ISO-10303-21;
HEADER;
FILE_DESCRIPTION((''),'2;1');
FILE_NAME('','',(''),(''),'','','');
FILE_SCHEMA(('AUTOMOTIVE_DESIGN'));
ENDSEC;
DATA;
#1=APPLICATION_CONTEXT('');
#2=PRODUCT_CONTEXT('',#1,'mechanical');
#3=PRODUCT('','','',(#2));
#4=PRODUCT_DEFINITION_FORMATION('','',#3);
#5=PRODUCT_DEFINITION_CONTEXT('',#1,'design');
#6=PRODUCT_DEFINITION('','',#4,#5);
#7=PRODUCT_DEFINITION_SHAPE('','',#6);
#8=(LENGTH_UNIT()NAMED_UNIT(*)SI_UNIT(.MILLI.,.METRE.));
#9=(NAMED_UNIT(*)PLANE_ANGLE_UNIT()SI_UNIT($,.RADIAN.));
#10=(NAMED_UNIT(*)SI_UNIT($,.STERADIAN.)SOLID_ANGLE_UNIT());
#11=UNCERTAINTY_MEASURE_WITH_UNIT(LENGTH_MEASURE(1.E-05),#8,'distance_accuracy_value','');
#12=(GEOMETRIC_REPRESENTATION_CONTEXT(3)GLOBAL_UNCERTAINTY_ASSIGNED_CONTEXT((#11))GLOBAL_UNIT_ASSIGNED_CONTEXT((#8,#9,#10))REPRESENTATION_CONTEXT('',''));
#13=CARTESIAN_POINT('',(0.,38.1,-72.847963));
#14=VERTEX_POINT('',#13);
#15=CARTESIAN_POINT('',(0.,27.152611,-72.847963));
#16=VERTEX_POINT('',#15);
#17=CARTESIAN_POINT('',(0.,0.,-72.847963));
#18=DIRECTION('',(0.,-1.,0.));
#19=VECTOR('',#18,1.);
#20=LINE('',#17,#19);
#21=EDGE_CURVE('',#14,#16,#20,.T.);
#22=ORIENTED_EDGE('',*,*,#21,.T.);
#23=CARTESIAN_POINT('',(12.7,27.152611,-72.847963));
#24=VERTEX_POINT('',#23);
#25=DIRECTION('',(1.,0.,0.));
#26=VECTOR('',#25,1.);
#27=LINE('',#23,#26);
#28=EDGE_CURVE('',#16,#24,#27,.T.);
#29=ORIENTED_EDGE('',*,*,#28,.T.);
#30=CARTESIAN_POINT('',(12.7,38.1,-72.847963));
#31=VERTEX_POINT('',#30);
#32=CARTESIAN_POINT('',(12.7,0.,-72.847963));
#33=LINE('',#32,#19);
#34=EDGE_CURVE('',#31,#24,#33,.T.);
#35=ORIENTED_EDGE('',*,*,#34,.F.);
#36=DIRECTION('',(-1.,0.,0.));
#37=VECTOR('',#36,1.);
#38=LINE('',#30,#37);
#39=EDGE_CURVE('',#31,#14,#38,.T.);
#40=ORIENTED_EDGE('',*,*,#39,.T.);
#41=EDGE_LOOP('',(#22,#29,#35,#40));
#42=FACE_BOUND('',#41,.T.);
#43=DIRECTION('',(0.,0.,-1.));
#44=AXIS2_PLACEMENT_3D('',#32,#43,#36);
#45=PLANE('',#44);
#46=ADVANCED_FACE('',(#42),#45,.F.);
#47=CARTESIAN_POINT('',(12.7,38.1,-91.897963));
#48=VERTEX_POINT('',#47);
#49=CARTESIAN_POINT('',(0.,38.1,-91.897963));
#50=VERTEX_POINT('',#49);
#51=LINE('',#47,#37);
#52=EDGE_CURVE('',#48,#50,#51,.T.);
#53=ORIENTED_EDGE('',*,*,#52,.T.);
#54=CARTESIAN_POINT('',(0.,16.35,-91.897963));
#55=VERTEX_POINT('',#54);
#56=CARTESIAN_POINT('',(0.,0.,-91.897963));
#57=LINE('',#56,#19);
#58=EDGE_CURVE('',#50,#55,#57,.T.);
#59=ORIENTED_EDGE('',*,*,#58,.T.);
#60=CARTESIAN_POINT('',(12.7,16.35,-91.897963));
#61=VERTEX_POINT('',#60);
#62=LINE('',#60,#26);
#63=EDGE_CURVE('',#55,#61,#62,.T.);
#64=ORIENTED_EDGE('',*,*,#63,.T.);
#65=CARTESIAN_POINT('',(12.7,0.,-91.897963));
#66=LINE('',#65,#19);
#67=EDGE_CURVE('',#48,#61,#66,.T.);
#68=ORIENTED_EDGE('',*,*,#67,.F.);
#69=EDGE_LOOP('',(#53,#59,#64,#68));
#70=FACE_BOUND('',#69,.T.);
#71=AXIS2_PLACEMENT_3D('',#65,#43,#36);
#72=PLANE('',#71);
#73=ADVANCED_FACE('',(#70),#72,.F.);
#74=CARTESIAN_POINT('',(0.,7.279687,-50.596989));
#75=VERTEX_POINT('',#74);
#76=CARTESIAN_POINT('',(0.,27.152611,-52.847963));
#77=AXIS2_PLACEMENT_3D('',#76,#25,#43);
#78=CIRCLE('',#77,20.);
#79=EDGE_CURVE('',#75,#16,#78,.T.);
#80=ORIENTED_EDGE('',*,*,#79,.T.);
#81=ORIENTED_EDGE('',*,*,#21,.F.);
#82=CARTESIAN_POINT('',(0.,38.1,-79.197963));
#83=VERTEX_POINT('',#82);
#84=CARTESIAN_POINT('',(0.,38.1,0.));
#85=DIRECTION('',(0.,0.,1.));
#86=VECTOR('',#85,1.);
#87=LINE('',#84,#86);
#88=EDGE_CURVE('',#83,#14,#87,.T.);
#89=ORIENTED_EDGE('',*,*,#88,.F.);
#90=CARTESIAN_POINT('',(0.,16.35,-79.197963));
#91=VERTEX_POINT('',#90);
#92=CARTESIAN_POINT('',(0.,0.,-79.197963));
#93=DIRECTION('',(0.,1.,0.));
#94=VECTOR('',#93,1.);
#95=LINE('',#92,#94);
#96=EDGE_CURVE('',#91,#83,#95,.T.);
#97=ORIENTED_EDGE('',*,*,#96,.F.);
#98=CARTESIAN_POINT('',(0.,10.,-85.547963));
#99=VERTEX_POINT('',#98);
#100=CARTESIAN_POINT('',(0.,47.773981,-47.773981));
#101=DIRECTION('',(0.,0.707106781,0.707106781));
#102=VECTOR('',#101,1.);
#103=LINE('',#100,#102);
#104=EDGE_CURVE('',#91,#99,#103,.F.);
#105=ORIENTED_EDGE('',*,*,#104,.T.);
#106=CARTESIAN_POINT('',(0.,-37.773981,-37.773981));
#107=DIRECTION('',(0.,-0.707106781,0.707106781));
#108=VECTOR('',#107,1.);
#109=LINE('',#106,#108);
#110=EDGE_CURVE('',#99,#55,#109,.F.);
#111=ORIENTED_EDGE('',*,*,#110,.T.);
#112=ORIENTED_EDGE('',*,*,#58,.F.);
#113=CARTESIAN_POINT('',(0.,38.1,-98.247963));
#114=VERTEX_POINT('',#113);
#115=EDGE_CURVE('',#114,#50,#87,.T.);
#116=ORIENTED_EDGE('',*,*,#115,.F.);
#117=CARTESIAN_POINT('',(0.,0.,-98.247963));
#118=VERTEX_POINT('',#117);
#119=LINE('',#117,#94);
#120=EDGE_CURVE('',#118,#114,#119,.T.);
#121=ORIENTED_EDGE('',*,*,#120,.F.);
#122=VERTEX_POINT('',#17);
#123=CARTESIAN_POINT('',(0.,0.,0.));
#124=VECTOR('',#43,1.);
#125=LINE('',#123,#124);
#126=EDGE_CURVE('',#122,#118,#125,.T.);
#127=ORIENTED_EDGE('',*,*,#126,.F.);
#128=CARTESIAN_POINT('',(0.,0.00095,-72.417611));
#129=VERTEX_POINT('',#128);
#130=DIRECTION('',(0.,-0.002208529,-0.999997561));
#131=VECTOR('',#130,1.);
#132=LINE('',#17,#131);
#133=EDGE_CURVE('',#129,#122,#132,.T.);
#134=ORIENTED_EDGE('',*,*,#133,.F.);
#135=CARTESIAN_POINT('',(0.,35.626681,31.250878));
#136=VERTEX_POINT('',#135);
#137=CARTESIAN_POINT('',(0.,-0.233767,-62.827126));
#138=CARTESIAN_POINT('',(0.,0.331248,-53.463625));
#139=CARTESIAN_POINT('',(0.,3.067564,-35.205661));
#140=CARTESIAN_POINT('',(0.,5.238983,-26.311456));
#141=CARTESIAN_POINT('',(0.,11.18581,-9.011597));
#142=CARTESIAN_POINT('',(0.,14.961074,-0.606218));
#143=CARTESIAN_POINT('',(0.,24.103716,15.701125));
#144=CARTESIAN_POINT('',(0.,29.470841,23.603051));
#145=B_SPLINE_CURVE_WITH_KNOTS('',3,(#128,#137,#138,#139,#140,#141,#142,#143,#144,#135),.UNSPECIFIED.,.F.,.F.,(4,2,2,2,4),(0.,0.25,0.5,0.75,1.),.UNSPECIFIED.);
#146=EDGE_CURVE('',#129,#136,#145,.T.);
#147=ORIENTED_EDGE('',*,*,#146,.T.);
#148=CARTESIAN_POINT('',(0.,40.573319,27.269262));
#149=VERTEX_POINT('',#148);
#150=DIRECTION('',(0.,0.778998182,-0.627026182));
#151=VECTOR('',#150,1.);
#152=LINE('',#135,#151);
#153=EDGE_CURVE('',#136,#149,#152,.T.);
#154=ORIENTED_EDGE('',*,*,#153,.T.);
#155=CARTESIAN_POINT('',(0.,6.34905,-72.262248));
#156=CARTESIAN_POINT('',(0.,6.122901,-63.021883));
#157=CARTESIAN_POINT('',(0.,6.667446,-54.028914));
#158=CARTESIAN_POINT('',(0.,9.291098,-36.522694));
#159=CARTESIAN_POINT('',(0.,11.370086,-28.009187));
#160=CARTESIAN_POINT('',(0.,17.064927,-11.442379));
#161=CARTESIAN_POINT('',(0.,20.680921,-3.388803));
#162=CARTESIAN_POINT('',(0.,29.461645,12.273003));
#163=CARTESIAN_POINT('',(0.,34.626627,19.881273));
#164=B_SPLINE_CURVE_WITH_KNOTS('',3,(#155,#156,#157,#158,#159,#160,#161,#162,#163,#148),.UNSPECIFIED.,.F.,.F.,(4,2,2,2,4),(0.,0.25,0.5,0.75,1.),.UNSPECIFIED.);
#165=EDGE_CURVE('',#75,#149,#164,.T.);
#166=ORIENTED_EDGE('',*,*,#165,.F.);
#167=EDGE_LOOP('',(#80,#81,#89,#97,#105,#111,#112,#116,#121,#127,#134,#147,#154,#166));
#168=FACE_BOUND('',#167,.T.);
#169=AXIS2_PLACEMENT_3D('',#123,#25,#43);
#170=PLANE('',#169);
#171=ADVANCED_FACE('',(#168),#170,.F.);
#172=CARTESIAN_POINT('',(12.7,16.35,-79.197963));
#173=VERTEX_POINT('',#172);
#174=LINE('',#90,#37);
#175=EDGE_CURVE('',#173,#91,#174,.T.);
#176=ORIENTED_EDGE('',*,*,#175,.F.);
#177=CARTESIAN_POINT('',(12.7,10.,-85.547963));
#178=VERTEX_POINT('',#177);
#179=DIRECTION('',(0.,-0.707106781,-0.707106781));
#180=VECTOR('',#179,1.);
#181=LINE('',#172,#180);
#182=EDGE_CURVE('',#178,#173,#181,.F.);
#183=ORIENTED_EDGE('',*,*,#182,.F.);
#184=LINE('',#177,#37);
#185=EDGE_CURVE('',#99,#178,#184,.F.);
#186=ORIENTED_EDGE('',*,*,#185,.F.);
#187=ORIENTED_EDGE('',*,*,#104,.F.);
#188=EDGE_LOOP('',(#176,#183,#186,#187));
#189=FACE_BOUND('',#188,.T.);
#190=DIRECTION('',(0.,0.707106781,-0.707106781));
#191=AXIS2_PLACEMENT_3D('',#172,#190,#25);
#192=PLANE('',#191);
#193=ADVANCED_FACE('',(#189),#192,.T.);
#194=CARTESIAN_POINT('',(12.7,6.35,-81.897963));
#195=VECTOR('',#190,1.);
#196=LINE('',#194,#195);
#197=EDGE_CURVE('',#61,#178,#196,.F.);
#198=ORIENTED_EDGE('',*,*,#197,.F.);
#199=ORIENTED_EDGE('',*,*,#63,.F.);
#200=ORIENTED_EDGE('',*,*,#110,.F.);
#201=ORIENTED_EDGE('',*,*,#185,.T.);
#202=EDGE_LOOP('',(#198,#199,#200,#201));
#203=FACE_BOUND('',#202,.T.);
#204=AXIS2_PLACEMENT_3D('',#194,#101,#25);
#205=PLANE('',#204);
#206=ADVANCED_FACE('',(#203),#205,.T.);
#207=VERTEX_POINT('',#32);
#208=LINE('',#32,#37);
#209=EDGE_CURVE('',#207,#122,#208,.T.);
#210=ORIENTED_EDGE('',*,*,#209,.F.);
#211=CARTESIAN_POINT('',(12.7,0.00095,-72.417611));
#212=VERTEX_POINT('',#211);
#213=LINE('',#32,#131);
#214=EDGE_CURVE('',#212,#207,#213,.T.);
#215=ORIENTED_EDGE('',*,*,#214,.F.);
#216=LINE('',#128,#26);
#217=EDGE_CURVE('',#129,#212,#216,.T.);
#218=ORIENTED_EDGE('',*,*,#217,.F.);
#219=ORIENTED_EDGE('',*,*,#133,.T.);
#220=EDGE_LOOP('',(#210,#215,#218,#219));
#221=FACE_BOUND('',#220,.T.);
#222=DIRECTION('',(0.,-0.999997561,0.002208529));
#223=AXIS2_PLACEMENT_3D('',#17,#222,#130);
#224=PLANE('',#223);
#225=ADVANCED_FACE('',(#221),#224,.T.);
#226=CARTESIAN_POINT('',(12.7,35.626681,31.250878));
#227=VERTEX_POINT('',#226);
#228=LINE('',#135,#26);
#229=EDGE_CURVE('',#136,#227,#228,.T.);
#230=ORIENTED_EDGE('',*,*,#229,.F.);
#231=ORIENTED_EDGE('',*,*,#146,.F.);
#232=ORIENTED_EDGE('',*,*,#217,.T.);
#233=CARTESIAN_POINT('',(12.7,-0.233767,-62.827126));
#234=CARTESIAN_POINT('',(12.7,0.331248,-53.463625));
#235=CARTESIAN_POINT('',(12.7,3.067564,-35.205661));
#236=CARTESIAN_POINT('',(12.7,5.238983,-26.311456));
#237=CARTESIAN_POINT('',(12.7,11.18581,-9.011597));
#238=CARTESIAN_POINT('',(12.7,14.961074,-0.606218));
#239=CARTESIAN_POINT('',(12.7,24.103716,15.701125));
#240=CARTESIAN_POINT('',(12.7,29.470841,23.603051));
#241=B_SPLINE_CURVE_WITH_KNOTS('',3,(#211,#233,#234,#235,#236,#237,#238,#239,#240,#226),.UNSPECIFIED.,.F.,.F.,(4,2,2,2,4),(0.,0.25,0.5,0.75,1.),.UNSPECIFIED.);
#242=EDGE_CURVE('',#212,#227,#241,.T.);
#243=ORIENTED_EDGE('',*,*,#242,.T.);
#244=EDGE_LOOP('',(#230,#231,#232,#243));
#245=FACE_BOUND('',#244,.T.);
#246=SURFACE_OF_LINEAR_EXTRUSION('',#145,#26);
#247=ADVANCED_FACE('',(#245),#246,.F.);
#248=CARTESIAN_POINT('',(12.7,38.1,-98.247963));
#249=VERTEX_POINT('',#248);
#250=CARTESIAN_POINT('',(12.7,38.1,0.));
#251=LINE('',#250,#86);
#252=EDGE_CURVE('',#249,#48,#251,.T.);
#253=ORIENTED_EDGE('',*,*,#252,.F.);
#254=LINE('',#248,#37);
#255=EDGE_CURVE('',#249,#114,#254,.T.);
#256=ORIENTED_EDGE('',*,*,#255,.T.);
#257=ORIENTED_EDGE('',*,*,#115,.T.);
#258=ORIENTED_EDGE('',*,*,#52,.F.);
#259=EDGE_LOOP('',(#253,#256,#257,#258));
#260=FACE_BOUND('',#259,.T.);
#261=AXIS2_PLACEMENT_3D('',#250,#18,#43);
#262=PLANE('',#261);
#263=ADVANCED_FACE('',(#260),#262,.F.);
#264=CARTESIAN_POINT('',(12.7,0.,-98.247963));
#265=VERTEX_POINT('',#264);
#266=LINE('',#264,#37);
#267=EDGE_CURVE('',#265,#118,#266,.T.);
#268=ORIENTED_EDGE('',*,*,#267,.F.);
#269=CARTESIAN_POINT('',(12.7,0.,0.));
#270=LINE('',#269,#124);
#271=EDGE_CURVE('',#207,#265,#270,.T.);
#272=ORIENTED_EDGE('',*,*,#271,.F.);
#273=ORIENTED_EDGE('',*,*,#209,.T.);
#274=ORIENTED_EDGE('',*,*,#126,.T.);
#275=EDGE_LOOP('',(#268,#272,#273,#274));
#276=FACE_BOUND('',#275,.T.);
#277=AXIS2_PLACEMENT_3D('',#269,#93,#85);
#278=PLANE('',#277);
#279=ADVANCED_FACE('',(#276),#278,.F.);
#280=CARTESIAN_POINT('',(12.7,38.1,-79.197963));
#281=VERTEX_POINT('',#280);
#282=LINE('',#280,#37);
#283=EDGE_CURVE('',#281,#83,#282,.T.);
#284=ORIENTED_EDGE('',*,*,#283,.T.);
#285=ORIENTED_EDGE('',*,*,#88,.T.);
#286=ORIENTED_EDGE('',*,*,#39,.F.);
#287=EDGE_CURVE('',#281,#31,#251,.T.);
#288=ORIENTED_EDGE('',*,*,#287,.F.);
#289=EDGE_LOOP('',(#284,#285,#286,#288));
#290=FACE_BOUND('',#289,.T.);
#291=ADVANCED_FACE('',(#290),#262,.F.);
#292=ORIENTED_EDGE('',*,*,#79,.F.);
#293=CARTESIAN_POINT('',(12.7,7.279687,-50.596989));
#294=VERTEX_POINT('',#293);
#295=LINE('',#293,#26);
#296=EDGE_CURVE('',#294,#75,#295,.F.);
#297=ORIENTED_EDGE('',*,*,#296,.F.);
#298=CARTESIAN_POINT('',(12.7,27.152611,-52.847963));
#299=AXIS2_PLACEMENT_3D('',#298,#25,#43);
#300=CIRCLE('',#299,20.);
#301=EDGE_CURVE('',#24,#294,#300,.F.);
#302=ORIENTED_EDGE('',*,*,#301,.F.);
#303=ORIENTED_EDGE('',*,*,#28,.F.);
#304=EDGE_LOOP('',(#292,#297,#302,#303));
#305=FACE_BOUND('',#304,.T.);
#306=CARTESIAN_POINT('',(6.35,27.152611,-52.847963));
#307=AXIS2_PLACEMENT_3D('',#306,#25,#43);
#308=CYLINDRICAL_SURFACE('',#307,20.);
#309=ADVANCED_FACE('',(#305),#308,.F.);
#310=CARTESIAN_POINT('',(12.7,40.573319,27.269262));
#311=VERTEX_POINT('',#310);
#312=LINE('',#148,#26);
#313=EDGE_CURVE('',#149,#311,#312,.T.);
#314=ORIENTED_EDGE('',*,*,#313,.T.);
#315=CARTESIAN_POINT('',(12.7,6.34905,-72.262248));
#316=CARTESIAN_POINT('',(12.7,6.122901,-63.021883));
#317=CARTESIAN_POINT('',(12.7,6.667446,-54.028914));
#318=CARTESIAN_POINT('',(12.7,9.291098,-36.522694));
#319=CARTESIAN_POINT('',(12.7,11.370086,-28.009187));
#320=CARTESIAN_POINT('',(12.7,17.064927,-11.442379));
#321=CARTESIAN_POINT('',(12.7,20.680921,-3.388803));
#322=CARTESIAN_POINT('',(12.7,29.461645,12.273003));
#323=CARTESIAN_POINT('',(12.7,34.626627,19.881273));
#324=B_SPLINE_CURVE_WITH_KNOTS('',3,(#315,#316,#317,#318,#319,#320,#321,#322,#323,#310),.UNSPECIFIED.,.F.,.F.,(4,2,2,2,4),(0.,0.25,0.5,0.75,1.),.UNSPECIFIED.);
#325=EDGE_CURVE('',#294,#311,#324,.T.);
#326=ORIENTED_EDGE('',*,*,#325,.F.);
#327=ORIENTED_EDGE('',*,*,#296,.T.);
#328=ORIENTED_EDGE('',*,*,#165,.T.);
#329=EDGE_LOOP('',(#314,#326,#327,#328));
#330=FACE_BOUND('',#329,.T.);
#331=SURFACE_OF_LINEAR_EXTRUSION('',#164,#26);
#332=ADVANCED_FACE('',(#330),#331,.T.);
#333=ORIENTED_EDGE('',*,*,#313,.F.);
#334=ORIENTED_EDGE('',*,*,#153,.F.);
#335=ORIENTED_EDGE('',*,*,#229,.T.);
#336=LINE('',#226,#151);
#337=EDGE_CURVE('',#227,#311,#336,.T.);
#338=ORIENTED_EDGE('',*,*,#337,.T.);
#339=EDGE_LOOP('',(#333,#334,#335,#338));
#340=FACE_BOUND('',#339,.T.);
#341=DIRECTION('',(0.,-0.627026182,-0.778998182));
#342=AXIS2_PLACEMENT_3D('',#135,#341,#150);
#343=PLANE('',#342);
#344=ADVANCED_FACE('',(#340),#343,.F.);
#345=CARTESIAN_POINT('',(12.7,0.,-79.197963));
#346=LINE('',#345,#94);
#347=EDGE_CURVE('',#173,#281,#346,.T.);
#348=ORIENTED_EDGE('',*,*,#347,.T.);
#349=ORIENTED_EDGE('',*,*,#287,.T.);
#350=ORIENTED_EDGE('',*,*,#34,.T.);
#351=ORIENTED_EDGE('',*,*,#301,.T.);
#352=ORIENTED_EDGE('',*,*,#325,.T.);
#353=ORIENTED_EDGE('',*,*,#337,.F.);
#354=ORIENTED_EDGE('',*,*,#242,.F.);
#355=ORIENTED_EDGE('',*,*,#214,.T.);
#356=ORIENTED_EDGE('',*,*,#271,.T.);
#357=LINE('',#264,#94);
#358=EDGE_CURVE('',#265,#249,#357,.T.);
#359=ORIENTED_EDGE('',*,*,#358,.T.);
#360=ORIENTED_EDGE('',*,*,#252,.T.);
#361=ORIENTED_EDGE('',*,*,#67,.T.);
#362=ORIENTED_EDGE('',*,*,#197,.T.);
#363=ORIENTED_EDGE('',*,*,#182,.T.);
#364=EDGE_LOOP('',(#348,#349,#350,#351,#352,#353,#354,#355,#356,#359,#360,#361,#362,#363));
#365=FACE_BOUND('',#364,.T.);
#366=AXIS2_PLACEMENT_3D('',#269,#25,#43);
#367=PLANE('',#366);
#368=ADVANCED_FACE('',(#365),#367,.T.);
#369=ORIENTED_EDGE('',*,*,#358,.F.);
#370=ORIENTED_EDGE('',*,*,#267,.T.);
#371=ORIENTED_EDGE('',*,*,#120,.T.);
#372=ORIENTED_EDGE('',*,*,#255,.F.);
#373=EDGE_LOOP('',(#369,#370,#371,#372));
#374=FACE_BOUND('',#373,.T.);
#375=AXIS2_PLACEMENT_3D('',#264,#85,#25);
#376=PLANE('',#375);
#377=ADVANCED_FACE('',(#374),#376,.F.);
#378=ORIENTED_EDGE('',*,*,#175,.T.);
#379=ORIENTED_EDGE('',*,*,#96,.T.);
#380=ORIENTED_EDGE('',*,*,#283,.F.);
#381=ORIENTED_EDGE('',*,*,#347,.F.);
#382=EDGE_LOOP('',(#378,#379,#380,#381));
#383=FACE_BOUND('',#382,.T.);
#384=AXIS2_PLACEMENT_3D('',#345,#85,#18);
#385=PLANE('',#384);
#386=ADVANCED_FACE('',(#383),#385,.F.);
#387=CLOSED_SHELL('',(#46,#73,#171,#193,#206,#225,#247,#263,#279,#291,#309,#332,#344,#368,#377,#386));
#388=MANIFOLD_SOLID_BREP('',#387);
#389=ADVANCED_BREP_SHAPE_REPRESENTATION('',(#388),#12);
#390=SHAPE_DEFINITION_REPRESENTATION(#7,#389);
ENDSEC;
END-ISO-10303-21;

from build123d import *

# Parameters (mm, degrees)
BOSS_EXTRUDE1_DEPTH = 12.7
EXTRUDE_THIN1_START = -6.35
EXTRUDE_THIN1_DEPTH = 12.7
BOSS_EXTRUDE2_DEPTH = 12.7
FILLET2_R           = 20
CHAMFER1_SIZE       = 10


# Read off the part's stored shape, not the designer's step: Extrude-Thin1
with BuildPart() as part:
    # Sketch1 → Boss-Extrude1 (new body)
    with BuildSketch(Plane(origin=(0, 0, 0), x_dir=(0, 0, -1), z_dir=(1, 0, 0))):
        Polygon((72.847962895, 3.175), (72.847962895, 0), (98.247962895, 0), (98.247962895, 38.1), (91.897962895, 38.1), (91.897962895, 6.35), (79.197962895, 6.35), (79.197962895, 38.1), (72.847962895, 38.1), align=None)
    extrude(amount=BOSS_EXTRUDE1_DEPTH)



with BuildPart() as body_2:
    # Extrude-Thin1 outline → Extrude-Thin1 (new body)
    with BuildSketch(Plane(origin=(6.35, 0, 0), x_dir=(0, 0, -1), z_dir=(1, 0, 0)).offset(EXTRUDE_THIN1_START)):
        with BuildLine():
            Line((72.417611424, 0.000950446), (72.262248261, 6.349049554))
            add(Edge.make_bspline(
                [(72.262248261, 6.349049554), (63.021883212, 6.122901173), (54.028914036, 6.667445615), (36.522694485, 9.291097632), (28.009187017, 11.370086401), (11.442378767, 17.064926737), (3.388803369, 20.680920683), (-12.273002956, 29.461644656), (-19.881272632, 34.626626552), (-27.26926203, 40.573319228)],
                knots=[0, 0, 0, 0, 0.25, 0.25, 0.5, 0.5, 0.75, 0.75, 1, 1, 1, 1], degree=3))
            Line((-27.26926203, 40.573319228), (-31.250878284, 35.626680772))
            add(Edge.make_bspline(
                [(72.417611424, 0.000950446), (62.82712633, -0.233766762), (53.463624565, 0.331247938), (35.205660639, 3.067563666), (26.31145557, 5.238983498), (9.011597154, 11.185809829), (0.606218421, 14.961073948), (-15.70112511, 24.103715563), (-23.603051159, 29.470841193), (-31.250878284, 35.626680772)],
                knots=[0, 0, 0, 0, 0.25, 0.25, 0.5, 0.5, 0.75, 0.75, 1, 1, 1, 1], degree=3))
        make_face()
    extrude(amount=EXTRUDE_THIN1_DEPTH)


with BuildPart() as part_1:
    add(part.part)

    add(body_2.part)  # Boss-Extrude2 merges body 2
    # Sketch3 → Boss-Extrude2 (add)
    with BuildSketch(Plane(origin=(12.7, 0, 0), x_dir=(0, 0, -1), z_dir=(1, 0, 0))):
        Polygon((72.262248261, 6.349049554), (72.847962895, 6.349049554), (72.847962895, 0), (72.417611424, 0.000950446), align=None)
    extrude(amount=-BOSS_EXTRUDE2_DEPTH)

    # Fillet2
    fillet2_edges = [part_1.edges().sort_by_distance(p)[0] for p in [
        (6.35, 6.349049554, -72.847962895),
    ]]
    fillet(fillet2_edges, radius=FILLET2_R)

    # Chamfer1
    # the kernel refuses this chamfer: 10 mm, written as the material it adds along each edge
    with BuildSketch(Plane(origin=(0, 6.35, -91.897962895), x_dir=(0, -0.027495876610586664, 0.9996219169112968), z_dir=(1, 0, 0)), Plane(origin=(0, 6.35, -79.197962895), x_dir=(0, 0.9996219169112968, 0.027495876610586317), z_dir=(1, 0, 0))) as chamfer1_piece_1:
        Polygon((CHAMFER1_SIZE * 0.999621916911, -CHAMFER1_SIZE * 0.0274958766106), (-CHAMFER1_SIZE * 0.0274958766106, -CHAMFER1_SIZE * 0.999621916911), (0, 0), align=None)
    extrude(amount=12.7)


solid = part_1.part
